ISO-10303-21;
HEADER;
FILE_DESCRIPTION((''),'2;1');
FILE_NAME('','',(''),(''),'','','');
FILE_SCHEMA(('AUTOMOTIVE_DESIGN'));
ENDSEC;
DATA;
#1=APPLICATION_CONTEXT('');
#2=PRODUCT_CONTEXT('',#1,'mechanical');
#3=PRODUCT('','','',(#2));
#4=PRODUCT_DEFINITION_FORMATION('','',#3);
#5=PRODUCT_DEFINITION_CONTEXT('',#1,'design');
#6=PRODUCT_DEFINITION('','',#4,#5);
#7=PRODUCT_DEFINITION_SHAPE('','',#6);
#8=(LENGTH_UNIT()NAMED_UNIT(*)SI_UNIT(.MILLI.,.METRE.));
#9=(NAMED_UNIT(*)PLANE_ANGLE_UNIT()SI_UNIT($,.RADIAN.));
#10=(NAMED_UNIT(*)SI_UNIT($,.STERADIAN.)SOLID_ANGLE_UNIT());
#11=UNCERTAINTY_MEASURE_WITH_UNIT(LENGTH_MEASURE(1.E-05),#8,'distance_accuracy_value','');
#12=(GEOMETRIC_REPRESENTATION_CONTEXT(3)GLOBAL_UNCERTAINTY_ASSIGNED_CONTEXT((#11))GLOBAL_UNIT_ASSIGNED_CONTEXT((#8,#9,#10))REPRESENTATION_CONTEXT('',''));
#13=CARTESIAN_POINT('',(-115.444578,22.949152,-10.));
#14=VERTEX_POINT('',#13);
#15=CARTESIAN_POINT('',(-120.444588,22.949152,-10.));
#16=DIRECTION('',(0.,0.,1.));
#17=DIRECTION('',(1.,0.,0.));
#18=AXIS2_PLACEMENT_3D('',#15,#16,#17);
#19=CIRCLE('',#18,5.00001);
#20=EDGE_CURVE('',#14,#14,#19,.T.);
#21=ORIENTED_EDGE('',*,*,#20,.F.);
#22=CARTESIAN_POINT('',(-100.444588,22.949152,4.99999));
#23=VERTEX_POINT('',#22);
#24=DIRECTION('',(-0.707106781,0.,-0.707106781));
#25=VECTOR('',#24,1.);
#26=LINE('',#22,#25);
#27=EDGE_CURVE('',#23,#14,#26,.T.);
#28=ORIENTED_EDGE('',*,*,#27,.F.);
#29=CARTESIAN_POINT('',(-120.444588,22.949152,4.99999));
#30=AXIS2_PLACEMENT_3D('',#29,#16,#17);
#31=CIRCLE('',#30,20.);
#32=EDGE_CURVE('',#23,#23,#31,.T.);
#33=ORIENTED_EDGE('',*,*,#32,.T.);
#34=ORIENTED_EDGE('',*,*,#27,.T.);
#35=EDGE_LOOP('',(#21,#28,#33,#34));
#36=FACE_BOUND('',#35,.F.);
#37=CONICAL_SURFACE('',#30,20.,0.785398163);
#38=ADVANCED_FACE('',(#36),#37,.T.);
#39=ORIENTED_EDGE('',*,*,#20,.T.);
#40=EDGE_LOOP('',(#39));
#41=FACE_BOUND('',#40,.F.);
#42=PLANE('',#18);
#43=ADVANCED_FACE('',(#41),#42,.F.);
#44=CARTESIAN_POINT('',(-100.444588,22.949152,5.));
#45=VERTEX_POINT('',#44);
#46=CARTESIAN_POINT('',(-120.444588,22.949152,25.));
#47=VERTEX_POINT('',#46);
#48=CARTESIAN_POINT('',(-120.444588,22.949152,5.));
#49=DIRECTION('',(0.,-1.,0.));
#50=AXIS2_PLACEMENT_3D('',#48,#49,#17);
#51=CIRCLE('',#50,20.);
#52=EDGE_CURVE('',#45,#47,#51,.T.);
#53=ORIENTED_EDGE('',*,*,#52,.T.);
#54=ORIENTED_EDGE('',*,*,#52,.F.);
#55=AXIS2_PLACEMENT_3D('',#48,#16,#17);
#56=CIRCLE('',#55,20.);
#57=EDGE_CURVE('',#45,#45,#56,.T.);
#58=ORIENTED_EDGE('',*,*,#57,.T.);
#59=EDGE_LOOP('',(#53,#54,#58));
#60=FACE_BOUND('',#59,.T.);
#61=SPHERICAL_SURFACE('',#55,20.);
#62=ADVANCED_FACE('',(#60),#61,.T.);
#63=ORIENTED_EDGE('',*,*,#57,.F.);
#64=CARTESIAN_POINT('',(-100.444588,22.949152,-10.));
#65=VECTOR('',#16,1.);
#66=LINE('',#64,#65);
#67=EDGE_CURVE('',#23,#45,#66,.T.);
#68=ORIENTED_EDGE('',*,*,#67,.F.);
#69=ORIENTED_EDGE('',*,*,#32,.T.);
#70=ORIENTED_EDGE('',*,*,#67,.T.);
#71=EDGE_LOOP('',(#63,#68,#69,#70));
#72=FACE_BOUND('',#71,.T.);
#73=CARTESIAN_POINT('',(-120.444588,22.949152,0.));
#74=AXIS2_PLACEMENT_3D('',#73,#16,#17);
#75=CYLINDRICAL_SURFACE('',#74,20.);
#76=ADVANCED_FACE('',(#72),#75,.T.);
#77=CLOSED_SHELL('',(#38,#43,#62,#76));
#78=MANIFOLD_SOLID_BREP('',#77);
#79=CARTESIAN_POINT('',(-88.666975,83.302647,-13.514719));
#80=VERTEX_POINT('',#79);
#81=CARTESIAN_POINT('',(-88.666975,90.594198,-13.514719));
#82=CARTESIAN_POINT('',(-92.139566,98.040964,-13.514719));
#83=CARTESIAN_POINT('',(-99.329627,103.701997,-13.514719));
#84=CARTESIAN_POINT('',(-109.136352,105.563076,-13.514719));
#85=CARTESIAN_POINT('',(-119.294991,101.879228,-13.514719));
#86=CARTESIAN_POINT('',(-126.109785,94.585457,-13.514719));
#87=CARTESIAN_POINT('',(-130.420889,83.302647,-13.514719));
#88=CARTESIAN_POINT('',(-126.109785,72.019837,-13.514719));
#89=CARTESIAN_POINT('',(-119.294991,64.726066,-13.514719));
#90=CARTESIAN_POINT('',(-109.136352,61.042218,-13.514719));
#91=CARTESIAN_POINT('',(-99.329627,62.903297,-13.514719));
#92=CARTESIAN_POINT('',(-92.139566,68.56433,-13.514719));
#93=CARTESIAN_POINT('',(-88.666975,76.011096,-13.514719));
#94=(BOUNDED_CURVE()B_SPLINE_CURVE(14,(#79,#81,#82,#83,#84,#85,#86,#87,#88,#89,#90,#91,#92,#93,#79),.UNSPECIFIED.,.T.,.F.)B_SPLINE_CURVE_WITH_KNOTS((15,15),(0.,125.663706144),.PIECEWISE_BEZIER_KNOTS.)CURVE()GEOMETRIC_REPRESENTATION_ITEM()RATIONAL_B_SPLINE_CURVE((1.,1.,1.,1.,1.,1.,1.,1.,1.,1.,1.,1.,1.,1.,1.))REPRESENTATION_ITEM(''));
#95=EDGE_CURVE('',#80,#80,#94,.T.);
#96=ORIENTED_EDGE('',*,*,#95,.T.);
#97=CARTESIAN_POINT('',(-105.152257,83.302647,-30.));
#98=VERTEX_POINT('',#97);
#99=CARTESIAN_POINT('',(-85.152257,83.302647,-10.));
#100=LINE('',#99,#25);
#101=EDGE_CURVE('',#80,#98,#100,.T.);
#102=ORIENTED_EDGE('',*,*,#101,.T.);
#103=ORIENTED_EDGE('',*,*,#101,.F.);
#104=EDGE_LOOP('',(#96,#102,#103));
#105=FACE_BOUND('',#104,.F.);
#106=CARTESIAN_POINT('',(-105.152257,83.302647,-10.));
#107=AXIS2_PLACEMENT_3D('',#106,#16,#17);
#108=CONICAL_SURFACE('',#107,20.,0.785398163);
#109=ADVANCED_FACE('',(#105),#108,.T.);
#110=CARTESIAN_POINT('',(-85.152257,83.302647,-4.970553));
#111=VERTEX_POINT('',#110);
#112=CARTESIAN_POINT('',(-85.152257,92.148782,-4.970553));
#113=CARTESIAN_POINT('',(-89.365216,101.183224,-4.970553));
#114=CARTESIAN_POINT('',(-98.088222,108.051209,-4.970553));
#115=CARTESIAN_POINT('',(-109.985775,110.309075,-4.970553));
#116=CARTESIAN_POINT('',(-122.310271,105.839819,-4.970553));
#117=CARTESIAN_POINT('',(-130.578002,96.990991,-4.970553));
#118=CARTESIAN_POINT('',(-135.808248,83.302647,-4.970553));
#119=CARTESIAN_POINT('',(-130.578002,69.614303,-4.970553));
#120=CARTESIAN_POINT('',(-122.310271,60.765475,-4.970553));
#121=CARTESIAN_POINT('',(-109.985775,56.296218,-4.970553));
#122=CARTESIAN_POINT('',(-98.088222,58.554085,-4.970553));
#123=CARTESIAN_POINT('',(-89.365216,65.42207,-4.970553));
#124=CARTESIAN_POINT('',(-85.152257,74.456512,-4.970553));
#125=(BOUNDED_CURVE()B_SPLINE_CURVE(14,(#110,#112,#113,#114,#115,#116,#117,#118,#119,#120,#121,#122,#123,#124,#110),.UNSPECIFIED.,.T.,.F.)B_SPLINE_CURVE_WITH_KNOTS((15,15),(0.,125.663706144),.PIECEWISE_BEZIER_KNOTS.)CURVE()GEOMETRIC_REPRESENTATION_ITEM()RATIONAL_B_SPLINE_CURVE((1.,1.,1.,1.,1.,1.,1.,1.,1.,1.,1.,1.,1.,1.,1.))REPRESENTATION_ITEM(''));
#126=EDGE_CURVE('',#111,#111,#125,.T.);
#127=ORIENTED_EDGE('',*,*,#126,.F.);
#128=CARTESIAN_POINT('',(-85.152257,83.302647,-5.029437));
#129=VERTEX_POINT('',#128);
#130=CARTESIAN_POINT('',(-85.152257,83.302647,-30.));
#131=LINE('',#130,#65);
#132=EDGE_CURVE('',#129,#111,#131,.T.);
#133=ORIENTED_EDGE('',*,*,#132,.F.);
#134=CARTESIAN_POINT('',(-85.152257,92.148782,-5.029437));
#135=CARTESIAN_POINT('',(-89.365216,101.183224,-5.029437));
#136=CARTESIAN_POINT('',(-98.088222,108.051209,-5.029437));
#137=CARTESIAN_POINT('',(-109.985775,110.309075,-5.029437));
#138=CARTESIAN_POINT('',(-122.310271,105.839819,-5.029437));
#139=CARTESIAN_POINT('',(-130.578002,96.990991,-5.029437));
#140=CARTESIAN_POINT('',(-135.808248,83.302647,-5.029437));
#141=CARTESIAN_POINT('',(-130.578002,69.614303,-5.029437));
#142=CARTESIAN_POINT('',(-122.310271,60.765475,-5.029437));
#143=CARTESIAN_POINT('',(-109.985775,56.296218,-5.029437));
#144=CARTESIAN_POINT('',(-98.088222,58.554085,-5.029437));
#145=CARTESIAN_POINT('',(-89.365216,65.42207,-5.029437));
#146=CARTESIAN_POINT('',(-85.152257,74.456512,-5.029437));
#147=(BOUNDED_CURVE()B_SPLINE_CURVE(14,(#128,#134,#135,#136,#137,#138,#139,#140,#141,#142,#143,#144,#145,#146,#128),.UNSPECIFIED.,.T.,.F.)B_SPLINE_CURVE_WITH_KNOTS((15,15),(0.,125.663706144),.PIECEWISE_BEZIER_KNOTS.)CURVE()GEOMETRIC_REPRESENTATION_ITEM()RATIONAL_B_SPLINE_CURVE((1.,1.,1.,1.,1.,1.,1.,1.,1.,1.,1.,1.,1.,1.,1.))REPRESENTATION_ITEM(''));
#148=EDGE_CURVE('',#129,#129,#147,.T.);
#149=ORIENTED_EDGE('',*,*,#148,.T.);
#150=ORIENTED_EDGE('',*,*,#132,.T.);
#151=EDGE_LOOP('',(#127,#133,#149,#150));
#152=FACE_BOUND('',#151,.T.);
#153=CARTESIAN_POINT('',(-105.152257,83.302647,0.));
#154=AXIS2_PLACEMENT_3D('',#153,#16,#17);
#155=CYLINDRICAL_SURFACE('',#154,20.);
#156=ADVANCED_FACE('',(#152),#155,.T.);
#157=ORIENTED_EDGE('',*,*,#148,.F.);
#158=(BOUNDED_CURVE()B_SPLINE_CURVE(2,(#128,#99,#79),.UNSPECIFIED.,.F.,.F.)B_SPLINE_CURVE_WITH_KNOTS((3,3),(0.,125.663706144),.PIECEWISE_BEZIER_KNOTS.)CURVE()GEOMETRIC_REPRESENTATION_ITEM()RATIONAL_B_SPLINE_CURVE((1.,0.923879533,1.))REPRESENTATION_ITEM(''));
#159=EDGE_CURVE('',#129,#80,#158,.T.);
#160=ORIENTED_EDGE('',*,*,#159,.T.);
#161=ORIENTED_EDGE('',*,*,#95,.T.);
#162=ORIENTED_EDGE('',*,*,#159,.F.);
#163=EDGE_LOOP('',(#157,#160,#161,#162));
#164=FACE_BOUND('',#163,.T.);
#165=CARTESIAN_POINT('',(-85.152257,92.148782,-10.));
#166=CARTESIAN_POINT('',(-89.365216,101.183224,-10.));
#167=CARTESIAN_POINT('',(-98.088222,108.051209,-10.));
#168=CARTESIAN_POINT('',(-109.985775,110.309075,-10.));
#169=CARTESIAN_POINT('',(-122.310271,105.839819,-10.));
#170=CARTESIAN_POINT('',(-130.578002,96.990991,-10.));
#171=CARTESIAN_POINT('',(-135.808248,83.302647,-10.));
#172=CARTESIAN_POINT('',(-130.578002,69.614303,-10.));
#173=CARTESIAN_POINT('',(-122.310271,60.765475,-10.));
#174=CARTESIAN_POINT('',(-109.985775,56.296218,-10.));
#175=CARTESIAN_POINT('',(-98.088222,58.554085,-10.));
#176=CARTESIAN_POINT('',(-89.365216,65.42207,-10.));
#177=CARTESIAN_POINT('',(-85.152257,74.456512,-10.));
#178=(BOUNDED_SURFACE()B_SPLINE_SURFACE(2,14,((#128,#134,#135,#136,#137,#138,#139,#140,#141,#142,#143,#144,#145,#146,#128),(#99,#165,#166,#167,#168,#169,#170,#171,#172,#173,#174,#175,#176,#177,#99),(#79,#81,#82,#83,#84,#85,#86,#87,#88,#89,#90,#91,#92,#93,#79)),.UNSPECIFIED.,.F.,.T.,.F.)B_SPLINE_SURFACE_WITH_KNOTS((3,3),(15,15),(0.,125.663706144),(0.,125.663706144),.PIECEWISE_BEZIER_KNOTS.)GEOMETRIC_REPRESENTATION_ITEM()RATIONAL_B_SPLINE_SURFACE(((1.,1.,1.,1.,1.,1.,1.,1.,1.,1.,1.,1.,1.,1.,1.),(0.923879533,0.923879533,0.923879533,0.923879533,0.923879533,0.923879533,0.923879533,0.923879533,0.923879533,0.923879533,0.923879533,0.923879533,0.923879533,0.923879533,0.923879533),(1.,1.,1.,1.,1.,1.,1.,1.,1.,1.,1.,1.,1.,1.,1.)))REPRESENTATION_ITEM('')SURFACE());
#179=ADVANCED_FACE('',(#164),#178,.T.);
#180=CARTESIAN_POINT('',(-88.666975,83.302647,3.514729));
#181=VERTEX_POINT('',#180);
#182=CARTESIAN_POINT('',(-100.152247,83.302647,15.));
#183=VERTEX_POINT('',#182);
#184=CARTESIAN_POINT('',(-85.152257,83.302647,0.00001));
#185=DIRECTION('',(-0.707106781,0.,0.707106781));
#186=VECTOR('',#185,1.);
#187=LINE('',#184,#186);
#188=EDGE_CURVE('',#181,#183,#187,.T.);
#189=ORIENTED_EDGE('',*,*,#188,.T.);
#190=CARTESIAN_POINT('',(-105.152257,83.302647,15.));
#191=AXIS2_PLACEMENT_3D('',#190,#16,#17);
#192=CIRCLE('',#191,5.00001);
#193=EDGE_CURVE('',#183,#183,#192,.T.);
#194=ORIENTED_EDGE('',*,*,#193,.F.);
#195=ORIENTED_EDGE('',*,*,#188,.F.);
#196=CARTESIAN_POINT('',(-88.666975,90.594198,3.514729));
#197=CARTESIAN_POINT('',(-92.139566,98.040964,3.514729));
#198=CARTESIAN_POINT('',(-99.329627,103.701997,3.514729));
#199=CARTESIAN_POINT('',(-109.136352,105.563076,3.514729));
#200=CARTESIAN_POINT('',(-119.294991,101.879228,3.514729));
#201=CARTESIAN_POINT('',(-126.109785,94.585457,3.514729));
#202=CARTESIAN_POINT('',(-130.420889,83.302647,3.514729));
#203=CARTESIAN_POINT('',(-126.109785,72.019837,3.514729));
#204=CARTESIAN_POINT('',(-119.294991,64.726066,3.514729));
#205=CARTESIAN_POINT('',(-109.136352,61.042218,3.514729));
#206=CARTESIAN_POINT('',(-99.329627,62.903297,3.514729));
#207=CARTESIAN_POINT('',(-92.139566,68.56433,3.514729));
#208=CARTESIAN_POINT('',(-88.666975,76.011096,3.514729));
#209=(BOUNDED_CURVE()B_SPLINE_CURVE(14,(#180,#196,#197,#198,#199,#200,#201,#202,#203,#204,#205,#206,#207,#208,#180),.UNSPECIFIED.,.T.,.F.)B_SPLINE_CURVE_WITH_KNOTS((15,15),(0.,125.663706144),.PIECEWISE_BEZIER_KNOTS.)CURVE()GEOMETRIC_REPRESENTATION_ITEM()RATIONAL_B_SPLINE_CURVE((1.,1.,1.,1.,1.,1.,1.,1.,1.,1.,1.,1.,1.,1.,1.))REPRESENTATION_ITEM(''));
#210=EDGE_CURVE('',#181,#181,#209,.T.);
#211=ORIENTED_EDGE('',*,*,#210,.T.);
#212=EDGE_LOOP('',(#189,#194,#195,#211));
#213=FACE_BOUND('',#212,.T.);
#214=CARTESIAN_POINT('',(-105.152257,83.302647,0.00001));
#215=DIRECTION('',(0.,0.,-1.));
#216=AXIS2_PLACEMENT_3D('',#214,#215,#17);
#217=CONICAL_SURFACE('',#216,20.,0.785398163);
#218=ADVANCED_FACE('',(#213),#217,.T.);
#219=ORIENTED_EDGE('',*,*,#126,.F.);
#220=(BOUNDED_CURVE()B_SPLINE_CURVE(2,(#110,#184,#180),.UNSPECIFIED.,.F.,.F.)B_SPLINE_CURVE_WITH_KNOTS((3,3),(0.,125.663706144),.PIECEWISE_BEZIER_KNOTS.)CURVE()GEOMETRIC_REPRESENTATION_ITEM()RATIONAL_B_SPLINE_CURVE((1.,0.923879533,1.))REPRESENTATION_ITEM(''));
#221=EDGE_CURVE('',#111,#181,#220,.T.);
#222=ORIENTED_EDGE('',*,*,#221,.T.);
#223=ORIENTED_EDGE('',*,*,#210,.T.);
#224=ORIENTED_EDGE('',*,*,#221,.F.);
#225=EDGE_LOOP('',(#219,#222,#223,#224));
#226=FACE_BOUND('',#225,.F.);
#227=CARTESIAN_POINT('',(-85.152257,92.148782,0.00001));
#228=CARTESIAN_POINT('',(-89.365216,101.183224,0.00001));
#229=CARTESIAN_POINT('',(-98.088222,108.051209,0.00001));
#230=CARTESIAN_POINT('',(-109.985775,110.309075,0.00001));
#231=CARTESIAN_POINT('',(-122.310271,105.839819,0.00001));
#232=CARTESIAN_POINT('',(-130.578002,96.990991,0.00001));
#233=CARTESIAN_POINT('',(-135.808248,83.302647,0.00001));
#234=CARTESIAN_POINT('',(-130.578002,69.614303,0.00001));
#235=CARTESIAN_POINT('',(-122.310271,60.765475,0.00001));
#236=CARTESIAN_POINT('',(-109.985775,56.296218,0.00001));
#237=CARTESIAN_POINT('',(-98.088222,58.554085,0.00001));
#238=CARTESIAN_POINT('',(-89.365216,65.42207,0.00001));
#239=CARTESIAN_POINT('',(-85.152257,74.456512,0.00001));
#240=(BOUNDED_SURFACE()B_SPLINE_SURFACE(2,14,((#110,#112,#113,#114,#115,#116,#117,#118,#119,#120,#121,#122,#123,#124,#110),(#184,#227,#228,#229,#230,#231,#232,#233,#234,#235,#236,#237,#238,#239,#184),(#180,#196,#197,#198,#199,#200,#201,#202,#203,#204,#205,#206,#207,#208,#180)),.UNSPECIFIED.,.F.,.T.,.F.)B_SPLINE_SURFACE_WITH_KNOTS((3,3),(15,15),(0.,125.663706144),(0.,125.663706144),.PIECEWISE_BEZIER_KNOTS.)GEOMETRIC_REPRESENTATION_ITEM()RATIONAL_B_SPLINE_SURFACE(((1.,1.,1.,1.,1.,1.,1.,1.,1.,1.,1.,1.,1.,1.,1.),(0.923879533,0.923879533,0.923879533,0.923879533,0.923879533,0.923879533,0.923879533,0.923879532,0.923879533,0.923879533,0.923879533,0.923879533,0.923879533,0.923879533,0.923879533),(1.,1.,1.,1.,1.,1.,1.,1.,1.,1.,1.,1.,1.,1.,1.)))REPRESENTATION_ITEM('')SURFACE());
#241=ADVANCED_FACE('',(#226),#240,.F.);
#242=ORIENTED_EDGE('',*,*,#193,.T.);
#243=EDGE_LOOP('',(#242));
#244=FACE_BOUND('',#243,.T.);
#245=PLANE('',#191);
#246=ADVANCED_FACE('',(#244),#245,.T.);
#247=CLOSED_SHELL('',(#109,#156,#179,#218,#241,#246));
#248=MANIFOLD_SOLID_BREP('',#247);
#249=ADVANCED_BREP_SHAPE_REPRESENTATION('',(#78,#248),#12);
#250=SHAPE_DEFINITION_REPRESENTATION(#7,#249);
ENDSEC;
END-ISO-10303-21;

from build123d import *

# Parameters (mm, degrees)
F0_R     = 20
F1_DEPTH = 15
F2_DEPTH = 30
F3_SIZE  = 20
F4_R     = 20
F5_DEPTH = 25
F6_R     = 20
F7_DEPTH = 10
F8_SIZE  = 14.99999
F9_SIZE  = 14.99999
F10_R    = 12


# Not quite as in the source:
# - a fillet or chamfer is up to 0.001 mm smaller than in the source, because OpenCascade refuses the exact size


with BuildPart() as f1:
    # F0 (on Top) → F1 (new body)
    with BuildSketch(Plane.XY):
        with Locations((-105.1522567868, 83.3026468754)):
            Circle(F0_R)
    extrude(amount=F1_DEPTH)

    # F2 (add): a face of the model
    f2_faces = [f1.faces().sort_by_distance(p)[0] for p in [
        (-105.1522567868, 83.3026468754, 0),
    ]]
    extrude(f2_faces, amount=F2_DEPTH)

    # F3
    f3_edges = [f1.edges().sort_by_distance(p)[0] for p in [
        (-125.152257, 83.302647, -30),
    ]]
    chamfer(f3_edges, length=F3_SIZE)

    # F9 (size 15 in the source; OpenCascade refuses exactly that, so slightly less here)
    f9_edges = [f1.edges().sort_by_distance(p)[0] for p in [
        (-125.152257, 83.302647, 15),
    ]]
    chamfer(f9_edges, length=F9_SIZE)

    # F10
    f10_edges = [f1.edges().sort_by_distance(p)[0] for p in [
        (-125.152257, 83.302647, 1e-05),
        (-125.152257, 83.302647, -10),
    ]]
    fillet(f10_edges, radius=F10_R)


with BuildPart() as f5:
    # F4 (on Top) → F5 (new body)
    with BuildSketch(Plane.XY):
        with Locations((-120.4445883632, 22.9491516948)):
            Circle(F4_R)
    extrude(amount=F5_DEPTH)

    # F6
    f6_edges = [f5.edges().sort_by_distance(p)[0] for p in [
        (-140.444588, 22.949152, 25),
    ]]
    fillet(f6_edges, radius=F6_R)

    # F7 (add): a face of the model
    f7_faces = [f5.faces().sort_by_distance(p)[0] for p in [
        (-120.4445883632, 22.9491516948, 0),
    ]]
    extrude(f7_faces, amount=F7_DEPTH)

    # F8 (size 15 in the source; OpenCascade refuses exactly that, so slightly less here)
    f8_edges = [f5.edges().sort_by_distance(p)[0] for p in [
        (-140.444588, 22.949152, -10),
    ]]
    chamfer(f8_edges, length=F8_SIZE)


solid = Compound([f1.part, f5.part])
